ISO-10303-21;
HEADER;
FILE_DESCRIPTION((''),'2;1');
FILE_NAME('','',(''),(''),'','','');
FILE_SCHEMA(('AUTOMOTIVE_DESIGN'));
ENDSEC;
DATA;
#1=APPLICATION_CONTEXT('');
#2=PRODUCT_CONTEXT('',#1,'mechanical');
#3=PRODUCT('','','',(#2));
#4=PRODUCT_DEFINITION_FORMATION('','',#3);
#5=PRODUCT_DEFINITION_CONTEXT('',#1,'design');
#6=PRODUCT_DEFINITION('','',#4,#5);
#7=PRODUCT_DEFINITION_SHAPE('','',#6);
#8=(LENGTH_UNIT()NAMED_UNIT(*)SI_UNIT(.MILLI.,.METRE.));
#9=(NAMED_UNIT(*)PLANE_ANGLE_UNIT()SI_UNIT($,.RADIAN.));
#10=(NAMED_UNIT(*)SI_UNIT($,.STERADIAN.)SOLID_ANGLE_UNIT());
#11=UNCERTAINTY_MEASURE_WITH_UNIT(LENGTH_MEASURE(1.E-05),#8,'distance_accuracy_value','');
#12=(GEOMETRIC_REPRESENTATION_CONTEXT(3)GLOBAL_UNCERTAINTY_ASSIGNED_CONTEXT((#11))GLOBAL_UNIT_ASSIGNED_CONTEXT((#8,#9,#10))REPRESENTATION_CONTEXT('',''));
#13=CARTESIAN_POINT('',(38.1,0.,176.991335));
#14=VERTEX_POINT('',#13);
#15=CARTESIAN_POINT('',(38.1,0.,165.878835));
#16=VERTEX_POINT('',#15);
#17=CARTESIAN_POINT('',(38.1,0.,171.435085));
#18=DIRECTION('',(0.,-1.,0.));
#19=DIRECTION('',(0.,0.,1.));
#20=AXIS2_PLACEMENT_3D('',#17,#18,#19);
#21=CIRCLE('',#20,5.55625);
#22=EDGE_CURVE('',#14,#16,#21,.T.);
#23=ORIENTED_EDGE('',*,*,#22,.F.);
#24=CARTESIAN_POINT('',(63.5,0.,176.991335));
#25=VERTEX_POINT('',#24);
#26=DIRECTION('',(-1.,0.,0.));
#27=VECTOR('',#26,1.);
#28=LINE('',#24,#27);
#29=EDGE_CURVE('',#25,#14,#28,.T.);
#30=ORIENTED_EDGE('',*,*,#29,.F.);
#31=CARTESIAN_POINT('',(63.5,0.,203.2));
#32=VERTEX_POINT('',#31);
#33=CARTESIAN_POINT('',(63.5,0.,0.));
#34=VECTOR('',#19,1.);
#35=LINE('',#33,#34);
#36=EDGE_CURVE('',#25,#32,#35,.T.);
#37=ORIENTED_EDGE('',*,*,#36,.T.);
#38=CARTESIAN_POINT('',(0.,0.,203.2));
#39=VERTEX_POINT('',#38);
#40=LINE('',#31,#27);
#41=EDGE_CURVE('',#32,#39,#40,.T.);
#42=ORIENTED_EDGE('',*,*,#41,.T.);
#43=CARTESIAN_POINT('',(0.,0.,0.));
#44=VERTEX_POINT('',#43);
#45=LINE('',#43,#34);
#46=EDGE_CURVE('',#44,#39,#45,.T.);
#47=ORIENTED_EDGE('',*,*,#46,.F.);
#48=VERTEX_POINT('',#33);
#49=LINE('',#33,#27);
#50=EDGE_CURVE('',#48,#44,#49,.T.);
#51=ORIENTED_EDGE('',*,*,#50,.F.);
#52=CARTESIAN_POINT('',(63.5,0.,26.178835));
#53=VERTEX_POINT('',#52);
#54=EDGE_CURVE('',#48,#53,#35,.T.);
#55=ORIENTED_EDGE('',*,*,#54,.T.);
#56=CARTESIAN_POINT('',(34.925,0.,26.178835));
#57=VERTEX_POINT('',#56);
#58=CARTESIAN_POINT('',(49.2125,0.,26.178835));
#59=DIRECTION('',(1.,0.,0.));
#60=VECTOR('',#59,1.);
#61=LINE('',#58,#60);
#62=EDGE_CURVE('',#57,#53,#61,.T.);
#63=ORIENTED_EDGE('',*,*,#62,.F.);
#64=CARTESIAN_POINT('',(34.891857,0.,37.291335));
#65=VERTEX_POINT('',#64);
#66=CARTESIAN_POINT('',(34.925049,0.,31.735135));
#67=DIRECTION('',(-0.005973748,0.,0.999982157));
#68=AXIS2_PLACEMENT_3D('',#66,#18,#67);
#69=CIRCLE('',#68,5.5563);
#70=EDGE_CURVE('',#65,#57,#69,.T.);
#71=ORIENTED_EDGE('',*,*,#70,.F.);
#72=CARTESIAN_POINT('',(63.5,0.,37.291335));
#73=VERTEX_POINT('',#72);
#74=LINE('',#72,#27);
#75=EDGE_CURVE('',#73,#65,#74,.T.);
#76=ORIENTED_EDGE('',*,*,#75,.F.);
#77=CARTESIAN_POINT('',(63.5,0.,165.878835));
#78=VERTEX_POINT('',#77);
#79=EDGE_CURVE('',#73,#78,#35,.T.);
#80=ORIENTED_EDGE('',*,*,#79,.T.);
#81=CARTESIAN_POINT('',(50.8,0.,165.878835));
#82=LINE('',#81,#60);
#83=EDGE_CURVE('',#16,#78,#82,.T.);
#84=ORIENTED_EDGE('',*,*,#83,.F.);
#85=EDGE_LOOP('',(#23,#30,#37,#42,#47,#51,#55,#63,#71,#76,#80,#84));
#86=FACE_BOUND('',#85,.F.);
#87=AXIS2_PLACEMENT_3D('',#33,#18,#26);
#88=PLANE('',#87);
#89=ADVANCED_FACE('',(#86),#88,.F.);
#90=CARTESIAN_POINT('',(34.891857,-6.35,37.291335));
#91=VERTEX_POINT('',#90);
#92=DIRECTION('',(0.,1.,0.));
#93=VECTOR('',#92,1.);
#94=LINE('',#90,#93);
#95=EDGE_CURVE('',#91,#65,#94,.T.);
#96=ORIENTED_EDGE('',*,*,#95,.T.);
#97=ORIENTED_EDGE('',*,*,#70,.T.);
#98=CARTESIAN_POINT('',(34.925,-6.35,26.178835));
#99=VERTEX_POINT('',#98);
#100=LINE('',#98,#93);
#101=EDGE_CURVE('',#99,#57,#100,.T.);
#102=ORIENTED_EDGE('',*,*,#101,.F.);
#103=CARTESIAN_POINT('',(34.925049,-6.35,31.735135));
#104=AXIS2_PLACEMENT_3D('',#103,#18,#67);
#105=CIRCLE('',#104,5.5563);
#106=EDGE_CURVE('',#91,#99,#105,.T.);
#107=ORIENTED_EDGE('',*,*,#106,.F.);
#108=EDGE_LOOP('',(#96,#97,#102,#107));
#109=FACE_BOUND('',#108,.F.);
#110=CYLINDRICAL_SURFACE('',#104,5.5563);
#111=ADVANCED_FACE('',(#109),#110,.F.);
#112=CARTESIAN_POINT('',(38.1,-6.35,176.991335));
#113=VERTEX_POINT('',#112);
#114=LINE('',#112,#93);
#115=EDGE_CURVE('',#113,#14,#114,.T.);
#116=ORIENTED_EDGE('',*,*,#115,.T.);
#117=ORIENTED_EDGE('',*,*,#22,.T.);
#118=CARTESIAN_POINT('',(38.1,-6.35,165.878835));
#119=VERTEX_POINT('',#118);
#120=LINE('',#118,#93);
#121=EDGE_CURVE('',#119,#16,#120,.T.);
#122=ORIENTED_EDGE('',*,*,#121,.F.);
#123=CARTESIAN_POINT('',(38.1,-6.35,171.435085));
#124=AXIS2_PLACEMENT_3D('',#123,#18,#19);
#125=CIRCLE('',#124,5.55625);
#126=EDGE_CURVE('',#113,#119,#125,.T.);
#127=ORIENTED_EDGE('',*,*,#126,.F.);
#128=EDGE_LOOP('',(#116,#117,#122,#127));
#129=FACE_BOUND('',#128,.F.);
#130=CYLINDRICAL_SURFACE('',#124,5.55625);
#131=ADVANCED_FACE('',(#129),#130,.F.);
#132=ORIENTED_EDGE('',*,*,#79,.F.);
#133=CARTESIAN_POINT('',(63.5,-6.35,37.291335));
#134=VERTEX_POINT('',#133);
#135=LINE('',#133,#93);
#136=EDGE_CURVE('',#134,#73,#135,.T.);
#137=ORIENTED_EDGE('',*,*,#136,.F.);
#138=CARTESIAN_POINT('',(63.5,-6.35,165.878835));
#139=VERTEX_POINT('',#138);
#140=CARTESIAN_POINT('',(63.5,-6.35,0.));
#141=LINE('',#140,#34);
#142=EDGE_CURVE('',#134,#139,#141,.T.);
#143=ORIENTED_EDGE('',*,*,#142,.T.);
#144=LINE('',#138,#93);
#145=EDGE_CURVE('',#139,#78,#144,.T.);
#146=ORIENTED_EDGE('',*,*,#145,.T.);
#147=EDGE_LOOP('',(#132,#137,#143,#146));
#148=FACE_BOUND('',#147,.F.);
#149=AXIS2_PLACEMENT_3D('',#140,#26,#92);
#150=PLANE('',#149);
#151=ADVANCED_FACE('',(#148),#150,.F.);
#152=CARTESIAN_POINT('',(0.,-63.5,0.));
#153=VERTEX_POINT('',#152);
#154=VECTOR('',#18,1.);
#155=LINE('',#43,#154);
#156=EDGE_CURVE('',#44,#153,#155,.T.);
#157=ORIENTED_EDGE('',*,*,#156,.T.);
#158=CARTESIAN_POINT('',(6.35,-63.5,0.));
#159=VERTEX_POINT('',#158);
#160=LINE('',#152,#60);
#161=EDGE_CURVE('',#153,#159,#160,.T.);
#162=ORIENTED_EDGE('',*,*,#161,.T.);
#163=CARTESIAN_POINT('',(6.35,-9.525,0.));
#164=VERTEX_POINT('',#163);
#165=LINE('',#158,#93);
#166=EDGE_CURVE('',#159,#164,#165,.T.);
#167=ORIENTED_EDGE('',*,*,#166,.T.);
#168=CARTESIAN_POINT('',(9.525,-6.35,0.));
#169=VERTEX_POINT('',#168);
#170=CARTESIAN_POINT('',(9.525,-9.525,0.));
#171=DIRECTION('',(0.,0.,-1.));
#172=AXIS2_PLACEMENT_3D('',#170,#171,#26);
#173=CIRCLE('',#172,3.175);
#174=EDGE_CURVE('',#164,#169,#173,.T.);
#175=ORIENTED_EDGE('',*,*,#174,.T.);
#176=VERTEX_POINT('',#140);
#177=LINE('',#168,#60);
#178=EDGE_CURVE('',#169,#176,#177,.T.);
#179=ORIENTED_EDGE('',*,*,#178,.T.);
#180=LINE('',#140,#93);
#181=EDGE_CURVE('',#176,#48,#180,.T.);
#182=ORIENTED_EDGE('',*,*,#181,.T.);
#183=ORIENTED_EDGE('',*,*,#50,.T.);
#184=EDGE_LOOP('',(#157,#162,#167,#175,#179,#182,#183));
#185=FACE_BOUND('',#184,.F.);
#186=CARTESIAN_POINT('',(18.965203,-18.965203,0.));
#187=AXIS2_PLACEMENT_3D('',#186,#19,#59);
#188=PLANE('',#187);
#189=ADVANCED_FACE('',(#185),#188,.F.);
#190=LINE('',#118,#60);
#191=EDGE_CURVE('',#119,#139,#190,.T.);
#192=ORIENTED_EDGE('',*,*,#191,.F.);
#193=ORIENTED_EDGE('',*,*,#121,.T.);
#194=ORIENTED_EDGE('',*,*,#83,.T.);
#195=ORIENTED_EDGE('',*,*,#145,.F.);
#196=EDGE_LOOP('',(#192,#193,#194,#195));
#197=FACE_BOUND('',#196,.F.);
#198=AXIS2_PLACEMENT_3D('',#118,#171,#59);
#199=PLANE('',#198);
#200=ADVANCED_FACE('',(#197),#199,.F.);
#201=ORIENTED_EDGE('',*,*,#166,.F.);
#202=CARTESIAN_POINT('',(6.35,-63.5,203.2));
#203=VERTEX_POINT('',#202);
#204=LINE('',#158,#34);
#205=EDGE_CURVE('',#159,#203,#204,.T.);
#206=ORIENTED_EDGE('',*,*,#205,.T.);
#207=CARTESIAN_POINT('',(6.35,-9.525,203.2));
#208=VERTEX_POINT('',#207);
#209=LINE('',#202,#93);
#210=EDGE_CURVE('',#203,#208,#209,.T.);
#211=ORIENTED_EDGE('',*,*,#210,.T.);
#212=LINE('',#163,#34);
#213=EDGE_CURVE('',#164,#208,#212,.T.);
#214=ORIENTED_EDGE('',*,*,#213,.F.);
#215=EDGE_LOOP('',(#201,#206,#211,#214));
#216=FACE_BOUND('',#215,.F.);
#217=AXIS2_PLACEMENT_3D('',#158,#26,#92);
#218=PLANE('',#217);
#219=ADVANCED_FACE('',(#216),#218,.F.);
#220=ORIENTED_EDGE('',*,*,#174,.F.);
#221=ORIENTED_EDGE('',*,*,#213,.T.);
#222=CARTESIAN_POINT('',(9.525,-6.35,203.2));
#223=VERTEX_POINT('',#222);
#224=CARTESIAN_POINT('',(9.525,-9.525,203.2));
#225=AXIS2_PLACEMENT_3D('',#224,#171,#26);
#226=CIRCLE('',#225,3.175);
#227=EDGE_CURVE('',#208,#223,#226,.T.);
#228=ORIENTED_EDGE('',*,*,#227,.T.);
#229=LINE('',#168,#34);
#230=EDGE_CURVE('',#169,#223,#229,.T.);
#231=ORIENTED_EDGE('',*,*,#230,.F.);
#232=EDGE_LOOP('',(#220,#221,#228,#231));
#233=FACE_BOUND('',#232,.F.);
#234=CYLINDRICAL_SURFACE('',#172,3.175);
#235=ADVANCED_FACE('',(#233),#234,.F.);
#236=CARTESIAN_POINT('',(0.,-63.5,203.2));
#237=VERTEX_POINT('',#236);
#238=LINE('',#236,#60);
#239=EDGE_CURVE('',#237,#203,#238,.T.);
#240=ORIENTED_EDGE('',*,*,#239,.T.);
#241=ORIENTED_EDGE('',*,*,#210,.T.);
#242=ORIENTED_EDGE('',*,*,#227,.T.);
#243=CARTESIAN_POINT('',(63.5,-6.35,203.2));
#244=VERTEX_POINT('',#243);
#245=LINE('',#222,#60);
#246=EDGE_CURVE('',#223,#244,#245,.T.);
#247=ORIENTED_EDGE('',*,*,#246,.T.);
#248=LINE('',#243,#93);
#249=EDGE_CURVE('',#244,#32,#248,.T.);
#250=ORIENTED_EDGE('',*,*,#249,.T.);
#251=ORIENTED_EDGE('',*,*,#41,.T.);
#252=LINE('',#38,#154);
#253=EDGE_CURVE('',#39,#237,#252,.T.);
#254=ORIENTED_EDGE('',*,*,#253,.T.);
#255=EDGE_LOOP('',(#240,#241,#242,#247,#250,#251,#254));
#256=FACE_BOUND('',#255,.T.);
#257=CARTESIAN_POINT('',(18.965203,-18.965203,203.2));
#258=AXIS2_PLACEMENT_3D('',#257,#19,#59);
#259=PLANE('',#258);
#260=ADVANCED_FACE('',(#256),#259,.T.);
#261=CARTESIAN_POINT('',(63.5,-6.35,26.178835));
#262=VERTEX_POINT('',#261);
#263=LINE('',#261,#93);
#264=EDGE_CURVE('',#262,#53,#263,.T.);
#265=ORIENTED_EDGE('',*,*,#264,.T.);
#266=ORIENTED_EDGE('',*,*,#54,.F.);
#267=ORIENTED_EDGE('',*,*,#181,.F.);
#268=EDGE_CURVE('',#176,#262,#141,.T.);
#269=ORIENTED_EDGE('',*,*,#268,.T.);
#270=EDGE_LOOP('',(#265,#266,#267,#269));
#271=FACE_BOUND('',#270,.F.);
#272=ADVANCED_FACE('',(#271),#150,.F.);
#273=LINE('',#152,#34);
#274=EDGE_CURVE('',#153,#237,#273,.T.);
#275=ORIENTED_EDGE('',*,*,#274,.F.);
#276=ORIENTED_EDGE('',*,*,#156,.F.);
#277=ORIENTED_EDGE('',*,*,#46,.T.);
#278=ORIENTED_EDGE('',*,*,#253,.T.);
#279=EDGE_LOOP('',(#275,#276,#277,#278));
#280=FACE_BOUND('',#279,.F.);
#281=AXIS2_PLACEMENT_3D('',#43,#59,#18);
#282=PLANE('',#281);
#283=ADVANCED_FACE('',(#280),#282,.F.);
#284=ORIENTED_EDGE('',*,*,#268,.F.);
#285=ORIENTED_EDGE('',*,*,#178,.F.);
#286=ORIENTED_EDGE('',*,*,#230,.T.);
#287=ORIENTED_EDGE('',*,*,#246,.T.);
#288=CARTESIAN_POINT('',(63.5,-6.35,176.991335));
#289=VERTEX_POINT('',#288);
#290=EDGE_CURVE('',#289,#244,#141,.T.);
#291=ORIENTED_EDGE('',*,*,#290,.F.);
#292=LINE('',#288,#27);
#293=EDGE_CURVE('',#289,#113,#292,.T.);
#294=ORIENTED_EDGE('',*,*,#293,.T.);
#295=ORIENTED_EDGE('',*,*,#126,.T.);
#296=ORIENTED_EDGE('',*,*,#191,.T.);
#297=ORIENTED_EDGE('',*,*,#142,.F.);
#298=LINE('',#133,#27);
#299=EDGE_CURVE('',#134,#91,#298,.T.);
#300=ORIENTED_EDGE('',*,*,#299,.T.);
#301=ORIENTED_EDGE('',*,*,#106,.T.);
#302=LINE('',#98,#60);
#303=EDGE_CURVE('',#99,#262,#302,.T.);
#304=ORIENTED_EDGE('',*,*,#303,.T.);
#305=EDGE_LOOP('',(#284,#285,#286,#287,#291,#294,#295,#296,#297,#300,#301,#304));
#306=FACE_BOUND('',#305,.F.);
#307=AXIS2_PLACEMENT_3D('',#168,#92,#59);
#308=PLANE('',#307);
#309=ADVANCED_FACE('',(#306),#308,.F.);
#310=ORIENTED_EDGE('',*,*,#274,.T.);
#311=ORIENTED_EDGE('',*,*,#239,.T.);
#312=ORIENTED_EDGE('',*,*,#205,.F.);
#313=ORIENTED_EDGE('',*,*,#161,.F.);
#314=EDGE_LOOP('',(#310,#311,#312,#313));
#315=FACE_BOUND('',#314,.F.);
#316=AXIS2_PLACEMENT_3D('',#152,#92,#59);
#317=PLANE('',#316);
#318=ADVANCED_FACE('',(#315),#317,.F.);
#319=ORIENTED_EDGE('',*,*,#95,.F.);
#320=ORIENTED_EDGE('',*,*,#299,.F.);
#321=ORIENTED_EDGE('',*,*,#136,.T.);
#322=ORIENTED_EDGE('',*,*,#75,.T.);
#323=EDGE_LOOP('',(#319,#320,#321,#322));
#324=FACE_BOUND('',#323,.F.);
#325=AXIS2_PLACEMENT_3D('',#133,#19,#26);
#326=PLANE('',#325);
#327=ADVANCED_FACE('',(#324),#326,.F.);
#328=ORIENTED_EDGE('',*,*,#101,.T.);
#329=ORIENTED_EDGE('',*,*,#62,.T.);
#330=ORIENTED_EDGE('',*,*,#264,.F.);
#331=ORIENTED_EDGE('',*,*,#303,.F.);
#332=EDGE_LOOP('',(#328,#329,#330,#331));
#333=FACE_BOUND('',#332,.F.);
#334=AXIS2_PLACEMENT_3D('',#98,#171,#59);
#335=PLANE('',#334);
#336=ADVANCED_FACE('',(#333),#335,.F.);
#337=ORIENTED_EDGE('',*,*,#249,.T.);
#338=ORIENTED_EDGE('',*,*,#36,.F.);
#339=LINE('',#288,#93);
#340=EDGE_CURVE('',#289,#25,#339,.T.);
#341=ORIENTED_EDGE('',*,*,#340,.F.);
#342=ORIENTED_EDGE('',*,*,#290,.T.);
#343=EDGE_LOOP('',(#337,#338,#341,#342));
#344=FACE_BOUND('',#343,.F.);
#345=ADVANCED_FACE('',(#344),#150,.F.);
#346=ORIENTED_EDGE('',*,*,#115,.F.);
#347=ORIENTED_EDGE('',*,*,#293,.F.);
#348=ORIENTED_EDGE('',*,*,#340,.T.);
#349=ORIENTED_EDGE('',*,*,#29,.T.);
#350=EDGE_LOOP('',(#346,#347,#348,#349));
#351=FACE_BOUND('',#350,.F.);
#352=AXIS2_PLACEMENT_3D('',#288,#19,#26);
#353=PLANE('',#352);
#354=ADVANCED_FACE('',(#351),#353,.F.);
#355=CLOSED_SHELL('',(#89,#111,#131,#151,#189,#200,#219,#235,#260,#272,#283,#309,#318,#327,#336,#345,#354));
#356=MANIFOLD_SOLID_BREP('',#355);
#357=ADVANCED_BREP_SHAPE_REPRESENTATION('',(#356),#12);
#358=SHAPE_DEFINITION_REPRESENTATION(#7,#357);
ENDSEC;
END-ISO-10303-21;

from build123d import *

# Parameters (mm, degrees)
F1_DEPTH = 203.2
F3_DEPTH = 25.4


# Not quite as in the source:
# - ends of sketch curves that miss each other by under 0.0002 mm in the source are joined


with BuildPart() as f1:
    # F0 (on Top) → F1 (new body)
    with BuildSketch(Plane.XY):
        with BuildLine():
            Line((0, -6.35), (0, -63.5))
            Line((0, -63.5), (6.35, -63.5))
            Line((6.35, -63.5), (6.35, -9.525))
            ThreePointArc((6.35, -9.525), (7.2799359697, -7.2799359697), (9.525, -6.35))
            Line((9.525, -6.35), (63.5, -6.35))
            Line((63.5, -6.35), (63.5, 0))
            Line((63.5, 0), (6.35, 0))
            Line((6.35, 0), (0, 0))
            Line((0, 0), (0, -6.35))
        make_face()
    extrude(amount=F1_DEPTH)

    # F2 (on face) → F3 (cut)
    with BuildSketch(Plane.XZ.offset(6.35)):
        with BuildLine():
            Line((38.1, 165.8788350046), (63.5, 165.8788350046))
            Line((63.5, 165.8788350046), (63.5, 176.9913350046))
            Line((63.5, 176.9913350046), (38.1, 176.9913350046))
            ThreePointArc((38.1, 176.9913350046), (32.54375, 171.4350850046), (38.1, 165.8788350046))
        make_face()
        with BuildLine():
            Line((34.925, 37.2913350046), (34.8918574917, 37.2913350046))
            ThreePointArc((34.8918574917, 37.2913350046), (29.3687747109, 31.7185139715), (34.925, 26.1788350046))
            Line((34.925, 26.1788350046), (63.5, 26.1788350046))
            Line((63.5, 26.1788350046), (63.5, 37.2913350046))
            Line((63.5, 37.2913350046), (34.925, 37.2913350046))
        make_face()
    extrude(amount=-F3_DEPTH, mode=Mode.SUBTRACT)


solid = f1.part
